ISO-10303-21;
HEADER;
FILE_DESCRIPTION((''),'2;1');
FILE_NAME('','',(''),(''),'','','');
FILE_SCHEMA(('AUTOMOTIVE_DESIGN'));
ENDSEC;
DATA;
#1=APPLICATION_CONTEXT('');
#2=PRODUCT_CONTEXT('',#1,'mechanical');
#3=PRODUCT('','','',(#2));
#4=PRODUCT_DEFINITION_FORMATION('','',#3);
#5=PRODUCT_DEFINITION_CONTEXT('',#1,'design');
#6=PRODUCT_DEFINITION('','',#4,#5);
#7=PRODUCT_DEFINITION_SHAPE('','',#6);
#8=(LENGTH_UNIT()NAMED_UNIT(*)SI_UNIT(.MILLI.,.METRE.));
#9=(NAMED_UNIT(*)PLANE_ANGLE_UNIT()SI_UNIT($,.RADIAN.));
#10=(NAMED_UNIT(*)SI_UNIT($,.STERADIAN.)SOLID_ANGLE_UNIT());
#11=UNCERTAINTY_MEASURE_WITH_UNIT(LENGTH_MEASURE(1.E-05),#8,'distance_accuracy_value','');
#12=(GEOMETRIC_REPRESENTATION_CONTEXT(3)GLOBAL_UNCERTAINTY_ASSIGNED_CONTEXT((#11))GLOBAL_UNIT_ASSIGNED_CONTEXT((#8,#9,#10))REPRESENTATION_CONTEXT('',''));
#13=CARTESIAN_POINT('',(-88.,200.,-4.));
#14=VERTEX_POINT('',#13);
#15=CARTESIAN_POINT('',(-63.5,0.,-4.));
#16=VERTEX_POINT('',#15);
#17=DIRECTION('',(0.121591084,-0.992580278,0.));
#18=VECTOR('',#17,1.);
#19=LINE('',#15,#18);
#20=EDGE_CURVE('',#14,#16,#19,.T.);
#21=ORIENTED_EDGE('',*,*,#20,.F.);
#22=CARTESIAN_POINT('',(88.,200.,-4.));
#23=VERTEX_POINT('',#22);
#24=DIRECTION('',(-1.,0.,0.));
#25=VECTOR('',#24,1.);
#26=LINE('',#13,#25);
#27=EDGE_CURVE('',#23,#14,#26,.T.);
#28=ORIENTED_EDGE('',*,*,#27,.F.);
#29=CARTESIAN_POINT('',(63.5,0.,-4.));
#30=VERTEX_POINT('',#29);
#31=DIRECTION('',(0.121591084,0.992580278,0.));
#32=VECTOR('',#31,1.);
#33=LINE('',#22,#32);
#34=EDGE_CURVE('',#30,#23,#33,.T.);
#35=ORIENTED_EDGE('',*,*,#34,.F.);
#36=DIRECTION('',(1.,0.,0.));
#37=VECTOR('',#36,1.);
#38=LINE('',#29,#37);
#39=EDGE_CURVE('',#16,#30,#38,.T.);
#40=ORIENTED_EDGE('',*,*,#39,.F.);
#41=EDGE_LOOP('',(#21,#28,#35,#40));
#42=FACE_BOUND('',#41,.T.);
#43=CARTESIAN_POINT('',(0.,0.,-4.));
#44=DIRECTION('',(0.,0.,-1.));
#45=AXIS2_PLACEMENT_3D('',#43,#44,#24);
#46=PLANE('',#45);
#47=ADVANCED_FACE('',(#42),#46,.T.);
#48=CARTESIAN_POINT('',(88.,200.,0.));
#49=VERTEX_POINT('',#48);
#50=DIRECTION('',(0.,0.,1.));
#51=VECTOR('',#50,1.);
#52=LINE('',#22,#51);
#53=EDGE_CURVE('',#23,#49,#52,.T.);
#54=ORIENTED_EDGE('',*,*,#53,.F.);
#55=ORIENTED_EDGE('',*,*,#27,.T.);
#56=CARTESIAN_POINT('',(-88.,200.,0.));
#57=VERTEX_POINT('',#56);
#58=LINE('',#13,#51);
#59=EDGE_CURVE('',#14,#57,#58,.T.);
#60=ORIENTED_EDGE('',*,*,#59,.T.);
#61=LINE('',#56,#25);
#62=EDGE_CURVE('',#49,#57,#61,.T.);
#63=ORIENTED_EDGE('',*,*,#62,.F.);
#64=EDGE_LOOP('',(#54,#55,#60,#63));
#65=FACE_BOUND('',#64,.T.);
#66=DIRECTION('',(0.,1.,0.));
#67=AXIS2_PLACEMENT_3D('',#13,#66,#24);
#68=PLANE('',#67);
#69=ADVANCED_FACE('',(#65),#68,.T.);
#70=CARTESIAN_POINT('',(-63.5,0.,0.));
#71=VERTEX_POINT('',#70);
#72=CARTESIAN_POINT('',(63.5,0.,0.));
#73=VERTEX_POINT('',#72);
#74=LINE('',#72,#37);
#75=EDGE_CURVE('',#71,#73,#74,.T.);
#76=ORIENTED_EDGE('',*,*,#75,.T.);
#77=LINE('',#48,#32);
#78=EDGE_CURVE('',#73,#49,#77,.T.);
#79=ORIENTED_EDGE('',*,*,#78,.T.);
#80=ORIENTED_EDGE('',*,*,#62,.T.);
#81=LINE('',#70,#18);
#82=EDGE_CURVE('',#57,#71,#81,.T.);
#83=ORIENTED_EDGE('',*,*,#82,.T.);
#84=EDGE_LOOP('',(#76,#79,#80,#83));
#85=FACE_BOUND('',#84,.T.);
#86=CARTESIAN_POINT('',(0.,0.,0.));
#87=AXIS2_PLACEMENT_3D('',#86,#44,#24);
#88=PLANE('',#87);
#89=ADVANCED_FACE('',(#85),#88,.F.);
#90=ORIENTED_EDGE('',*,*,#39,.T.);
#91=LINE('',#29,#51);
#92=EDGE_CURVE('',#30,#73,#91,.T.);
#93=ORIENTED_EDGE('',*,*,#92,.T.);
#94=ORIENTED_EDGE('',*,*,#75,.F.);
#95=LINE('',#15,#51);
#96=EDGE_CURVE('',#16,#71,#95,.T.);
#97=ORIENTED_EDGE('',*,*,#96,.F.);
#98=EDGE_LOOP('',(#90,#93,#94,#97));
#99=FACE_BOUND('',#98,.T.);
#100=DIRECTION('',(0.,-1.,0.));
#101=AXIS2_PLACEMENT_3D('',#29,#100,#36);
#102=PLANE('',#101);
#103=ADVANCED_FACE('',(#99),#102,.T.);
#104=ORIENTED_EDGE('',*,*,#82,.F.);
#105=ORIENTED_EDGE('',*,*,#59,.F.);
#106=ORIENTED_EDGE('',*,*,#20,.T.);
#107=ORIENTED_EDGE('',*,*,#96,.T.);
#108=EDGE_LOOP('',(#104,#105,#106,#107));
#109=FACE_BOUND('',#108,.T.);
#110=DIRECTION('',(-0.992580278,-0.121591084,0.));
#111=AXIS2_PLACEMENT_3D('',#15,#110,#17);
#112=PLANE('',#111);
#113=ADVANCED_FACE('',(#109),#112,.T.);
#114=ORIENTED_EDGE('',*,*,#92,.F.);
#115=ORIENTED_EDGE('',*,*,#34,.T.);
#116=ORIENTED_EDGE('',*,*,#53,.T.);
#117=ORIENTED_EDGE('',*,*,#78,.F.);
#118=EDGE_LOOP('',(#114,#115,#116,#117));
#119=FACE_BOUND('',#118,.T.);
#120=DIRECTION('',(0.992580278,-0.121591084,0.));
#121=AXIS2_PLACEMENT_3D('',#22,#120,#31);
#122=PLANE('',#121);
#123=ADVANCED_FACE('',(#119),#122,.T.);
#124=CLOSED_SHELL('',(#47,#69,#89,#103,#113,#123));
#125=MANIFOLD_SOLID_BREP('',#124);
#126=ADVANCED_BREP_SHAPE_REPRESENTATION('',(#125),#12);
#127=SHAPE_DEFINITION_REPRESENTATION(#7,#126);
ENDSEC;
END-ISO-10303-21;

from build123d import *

# Parameters (mm, degrees)
BASE_FLANGE1_DEPTH = 4


# Sheet-metal steps are written as plain solids
with BuildPart() as part:
    # Sketch1 → Base-Flange1 (new body)
    with BuildSketch(Plane.XY):
        Polygon((-88, 200), (88, 200), (63.5, 0), (-63.5, 0), align=None)
    extrude(amount=-BASE_FLANGE1_DEPTH)


solid = part.part
